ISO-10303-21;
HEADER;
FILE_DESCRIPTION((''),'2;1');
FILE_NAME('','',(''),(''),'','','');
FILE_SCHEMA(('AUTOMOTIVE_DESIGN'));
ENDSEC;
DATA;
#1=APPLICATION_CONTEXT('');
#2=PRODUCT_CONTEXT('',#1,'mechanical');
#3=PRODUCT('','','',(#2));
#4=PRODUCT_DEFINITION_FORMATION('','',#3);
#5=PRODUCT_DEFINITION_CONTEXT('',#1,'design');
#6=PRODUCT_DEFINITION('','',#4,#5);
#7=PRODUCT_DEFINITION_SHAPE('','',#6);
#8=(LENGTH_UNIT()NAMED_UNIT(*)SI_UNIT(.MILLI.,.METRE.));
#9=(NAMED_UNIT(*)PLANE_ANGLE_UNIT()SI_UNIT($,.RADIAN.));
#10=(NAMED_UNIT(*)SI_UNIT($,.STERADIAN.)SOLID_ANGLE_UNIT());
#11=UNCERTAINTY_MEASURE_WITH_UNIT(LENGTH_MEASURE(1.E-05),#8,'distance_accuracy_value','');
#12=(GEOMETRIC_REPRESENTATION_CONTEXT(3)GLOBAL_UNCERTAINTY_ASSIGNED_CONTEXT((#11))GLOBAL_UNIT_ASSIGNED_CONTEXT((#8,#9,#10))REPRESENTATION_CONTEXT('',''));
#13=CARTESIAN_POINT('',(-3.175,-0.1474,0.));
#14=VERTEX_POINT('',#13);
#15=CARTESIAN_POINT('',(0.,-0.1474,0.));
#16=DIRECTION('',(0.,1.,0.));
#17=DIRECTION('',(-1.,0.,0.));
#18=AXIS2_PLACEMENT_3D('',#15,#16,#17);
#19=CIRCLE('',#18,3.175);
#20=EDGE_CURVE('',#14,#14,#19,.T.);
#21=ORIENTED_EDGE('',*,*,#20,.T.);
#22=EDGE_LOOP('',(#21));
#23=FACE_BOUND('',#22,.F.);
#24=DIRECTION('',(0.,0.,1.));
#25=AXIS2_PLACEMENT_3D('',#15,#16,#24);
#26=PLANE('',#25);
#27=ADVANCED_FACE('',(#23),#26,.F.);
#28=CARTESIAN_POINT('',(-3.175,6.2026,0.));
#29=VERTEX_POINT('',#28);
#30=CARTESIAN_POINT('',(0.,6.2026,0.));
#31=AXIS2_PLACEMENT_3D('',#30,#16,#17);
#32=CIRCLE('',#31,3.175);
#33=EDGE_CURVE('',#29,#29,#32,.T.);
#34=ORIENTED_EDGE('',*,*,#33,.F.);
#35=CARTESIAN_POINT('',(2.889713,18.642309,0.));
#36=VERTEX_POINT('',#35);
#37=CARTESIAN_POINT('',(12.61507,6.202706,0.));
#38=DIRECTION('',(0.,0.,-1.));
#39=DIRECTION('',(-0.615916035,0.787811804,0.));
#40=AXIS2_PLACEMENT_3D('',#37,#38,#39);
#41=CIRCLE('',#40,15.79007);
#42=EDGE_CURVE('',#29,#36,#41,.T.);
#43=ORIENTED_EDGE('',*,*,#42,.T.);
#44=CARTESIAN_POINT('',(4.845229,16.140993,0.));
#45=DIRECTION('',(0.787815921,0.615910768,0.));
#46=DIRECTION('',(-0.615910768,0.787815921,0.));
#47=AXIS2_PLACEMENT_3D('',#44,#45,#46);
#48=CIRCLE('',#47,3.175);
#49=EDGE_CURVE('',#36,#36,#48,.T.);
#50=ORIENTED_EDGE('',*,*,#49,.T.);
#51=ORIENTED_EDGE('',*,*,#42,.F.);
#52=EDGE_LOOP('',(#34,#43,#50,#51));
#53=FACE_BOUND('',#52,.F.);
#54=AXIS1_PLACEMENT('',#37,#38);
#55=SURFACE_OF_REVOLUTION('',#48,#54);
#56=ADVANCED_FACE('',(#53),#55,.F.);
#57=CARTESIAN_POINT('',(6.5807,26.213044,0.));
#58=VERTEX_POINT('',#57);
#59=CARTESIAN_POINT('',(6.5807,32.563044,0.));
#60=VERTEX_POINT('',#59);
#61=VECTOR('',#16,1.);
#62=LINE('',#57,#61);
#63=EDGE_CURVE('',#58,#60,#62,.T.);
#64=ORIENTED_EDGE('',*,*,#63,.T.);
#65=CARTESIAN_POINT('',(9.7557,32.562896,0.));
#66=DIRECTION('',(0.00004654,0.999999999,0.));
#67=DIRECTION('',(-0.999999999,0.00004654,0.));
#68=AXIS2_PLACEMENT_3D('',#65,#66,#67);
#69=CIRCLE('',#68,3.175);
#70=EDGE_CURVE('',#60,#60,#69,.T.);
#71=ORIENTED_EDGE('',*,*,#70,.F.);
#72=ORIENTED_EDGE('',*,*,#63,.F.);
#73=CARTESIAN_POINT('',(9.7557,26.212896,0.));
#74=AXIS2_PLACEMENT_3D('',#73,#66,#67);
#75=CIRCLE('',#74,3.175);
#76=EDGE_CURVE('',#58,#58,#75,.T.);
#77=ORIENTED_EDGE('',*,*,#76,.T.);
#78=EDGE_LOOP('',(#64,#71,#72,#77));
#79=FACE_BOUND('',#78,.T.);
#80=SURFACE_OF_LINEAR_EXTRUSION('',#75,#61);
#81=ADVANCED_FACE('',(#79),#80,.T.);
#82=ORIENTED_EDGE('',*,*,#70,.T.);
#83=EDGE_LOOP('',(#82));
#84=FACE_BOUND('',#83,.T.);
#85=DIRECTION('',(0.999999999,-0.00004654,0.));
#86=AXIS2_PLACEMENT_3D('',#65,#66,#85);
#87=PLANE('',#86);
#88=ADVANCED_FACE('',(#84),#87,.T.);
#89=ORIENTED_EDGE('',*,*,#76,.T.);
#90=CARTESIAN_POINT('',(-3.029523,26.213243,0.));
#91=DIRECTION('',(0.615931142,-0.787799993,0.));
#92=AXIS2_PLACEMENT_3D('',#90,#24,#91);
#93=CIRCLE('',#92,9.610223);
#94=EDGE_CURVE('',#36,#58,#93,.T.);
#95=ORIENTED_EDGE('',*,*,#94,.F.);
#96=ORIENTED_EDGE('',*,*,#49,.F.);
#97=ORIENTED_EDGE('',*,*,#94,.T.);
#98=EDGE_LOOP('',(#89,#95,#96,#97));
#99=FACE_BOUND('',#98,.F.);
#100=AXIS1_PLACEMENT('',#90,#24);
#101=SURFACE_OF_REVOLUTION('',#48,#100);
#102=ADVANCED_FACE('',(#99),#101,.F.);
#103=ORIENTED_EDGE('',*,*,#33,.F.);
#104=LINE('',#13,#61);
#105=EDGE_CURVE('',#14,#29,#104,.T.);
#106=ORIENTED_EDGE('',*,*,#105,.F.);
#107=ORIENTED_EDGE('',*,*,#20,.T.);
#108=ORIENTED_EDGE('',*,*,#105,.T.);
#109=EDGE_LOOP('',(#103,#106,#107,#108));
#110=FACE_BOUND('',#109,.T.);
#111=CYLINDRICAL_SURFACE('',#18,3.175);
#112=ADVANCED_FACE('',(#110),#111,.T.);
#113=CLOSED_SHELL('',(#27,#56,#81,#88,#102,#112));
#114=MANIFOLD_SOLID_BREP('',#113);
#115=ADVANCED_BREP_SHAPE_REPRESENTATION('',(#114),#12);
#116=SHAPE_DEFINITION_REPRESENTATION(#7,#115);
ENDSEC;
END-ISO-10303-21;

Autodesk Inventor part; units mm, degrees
ref_plane "YZ Plane" through (0, 0, 0) normal (1, 0, 0) x (0, 1, 0)
ref_plane "XZ Plane" through (0, 0, 0) normal (0, 1, 0) x (-1, 0, 0)
ref_plane "XY Plane" through (0, 0, 0) normal (0, 0, 1) x (1, 0, 0)
sketch "Sketch1" plane through (0, 0, 0) normal (0, 0, 1) x (1, 0, 0)
  line L0 (-0.0848, -0.1474) -> (-0.0848, 6.2026)
  line L1 (4.793, 16.2078) -> (4.793, 16.2078)
  line L2 (9.6709, 26.2129) -> (9.6709, 32.5629)
  arc A0 (4.793, 16.2078) -> (-0.0848, 6.2026) centre (12.6152, 6.2026) ccw
  arc A1 (4.793, 16.2078) -> (9.6709, 26.2129) centre (-3.0291, 26.2129) ccw
  point P0 (0, 0)
  point P1 (-0.0848, 12.3942)
  dimension "d3" = 12.7
  dimension "d4" = 6.35
  dimension "d5" = 6.35
  dimension "d6" = 0
sketch "Sketch2" plane through (0, 0, 0) normal (0, 1, 0) x (-1, 0, 0)
  circle A0 centre (0, 0) radius 3.175
  dimension "d1" = 6.35
sweep "Sweep1" add profiles "Sketch2" path "Sketch1"
properties part number "FeedSplitter2"
